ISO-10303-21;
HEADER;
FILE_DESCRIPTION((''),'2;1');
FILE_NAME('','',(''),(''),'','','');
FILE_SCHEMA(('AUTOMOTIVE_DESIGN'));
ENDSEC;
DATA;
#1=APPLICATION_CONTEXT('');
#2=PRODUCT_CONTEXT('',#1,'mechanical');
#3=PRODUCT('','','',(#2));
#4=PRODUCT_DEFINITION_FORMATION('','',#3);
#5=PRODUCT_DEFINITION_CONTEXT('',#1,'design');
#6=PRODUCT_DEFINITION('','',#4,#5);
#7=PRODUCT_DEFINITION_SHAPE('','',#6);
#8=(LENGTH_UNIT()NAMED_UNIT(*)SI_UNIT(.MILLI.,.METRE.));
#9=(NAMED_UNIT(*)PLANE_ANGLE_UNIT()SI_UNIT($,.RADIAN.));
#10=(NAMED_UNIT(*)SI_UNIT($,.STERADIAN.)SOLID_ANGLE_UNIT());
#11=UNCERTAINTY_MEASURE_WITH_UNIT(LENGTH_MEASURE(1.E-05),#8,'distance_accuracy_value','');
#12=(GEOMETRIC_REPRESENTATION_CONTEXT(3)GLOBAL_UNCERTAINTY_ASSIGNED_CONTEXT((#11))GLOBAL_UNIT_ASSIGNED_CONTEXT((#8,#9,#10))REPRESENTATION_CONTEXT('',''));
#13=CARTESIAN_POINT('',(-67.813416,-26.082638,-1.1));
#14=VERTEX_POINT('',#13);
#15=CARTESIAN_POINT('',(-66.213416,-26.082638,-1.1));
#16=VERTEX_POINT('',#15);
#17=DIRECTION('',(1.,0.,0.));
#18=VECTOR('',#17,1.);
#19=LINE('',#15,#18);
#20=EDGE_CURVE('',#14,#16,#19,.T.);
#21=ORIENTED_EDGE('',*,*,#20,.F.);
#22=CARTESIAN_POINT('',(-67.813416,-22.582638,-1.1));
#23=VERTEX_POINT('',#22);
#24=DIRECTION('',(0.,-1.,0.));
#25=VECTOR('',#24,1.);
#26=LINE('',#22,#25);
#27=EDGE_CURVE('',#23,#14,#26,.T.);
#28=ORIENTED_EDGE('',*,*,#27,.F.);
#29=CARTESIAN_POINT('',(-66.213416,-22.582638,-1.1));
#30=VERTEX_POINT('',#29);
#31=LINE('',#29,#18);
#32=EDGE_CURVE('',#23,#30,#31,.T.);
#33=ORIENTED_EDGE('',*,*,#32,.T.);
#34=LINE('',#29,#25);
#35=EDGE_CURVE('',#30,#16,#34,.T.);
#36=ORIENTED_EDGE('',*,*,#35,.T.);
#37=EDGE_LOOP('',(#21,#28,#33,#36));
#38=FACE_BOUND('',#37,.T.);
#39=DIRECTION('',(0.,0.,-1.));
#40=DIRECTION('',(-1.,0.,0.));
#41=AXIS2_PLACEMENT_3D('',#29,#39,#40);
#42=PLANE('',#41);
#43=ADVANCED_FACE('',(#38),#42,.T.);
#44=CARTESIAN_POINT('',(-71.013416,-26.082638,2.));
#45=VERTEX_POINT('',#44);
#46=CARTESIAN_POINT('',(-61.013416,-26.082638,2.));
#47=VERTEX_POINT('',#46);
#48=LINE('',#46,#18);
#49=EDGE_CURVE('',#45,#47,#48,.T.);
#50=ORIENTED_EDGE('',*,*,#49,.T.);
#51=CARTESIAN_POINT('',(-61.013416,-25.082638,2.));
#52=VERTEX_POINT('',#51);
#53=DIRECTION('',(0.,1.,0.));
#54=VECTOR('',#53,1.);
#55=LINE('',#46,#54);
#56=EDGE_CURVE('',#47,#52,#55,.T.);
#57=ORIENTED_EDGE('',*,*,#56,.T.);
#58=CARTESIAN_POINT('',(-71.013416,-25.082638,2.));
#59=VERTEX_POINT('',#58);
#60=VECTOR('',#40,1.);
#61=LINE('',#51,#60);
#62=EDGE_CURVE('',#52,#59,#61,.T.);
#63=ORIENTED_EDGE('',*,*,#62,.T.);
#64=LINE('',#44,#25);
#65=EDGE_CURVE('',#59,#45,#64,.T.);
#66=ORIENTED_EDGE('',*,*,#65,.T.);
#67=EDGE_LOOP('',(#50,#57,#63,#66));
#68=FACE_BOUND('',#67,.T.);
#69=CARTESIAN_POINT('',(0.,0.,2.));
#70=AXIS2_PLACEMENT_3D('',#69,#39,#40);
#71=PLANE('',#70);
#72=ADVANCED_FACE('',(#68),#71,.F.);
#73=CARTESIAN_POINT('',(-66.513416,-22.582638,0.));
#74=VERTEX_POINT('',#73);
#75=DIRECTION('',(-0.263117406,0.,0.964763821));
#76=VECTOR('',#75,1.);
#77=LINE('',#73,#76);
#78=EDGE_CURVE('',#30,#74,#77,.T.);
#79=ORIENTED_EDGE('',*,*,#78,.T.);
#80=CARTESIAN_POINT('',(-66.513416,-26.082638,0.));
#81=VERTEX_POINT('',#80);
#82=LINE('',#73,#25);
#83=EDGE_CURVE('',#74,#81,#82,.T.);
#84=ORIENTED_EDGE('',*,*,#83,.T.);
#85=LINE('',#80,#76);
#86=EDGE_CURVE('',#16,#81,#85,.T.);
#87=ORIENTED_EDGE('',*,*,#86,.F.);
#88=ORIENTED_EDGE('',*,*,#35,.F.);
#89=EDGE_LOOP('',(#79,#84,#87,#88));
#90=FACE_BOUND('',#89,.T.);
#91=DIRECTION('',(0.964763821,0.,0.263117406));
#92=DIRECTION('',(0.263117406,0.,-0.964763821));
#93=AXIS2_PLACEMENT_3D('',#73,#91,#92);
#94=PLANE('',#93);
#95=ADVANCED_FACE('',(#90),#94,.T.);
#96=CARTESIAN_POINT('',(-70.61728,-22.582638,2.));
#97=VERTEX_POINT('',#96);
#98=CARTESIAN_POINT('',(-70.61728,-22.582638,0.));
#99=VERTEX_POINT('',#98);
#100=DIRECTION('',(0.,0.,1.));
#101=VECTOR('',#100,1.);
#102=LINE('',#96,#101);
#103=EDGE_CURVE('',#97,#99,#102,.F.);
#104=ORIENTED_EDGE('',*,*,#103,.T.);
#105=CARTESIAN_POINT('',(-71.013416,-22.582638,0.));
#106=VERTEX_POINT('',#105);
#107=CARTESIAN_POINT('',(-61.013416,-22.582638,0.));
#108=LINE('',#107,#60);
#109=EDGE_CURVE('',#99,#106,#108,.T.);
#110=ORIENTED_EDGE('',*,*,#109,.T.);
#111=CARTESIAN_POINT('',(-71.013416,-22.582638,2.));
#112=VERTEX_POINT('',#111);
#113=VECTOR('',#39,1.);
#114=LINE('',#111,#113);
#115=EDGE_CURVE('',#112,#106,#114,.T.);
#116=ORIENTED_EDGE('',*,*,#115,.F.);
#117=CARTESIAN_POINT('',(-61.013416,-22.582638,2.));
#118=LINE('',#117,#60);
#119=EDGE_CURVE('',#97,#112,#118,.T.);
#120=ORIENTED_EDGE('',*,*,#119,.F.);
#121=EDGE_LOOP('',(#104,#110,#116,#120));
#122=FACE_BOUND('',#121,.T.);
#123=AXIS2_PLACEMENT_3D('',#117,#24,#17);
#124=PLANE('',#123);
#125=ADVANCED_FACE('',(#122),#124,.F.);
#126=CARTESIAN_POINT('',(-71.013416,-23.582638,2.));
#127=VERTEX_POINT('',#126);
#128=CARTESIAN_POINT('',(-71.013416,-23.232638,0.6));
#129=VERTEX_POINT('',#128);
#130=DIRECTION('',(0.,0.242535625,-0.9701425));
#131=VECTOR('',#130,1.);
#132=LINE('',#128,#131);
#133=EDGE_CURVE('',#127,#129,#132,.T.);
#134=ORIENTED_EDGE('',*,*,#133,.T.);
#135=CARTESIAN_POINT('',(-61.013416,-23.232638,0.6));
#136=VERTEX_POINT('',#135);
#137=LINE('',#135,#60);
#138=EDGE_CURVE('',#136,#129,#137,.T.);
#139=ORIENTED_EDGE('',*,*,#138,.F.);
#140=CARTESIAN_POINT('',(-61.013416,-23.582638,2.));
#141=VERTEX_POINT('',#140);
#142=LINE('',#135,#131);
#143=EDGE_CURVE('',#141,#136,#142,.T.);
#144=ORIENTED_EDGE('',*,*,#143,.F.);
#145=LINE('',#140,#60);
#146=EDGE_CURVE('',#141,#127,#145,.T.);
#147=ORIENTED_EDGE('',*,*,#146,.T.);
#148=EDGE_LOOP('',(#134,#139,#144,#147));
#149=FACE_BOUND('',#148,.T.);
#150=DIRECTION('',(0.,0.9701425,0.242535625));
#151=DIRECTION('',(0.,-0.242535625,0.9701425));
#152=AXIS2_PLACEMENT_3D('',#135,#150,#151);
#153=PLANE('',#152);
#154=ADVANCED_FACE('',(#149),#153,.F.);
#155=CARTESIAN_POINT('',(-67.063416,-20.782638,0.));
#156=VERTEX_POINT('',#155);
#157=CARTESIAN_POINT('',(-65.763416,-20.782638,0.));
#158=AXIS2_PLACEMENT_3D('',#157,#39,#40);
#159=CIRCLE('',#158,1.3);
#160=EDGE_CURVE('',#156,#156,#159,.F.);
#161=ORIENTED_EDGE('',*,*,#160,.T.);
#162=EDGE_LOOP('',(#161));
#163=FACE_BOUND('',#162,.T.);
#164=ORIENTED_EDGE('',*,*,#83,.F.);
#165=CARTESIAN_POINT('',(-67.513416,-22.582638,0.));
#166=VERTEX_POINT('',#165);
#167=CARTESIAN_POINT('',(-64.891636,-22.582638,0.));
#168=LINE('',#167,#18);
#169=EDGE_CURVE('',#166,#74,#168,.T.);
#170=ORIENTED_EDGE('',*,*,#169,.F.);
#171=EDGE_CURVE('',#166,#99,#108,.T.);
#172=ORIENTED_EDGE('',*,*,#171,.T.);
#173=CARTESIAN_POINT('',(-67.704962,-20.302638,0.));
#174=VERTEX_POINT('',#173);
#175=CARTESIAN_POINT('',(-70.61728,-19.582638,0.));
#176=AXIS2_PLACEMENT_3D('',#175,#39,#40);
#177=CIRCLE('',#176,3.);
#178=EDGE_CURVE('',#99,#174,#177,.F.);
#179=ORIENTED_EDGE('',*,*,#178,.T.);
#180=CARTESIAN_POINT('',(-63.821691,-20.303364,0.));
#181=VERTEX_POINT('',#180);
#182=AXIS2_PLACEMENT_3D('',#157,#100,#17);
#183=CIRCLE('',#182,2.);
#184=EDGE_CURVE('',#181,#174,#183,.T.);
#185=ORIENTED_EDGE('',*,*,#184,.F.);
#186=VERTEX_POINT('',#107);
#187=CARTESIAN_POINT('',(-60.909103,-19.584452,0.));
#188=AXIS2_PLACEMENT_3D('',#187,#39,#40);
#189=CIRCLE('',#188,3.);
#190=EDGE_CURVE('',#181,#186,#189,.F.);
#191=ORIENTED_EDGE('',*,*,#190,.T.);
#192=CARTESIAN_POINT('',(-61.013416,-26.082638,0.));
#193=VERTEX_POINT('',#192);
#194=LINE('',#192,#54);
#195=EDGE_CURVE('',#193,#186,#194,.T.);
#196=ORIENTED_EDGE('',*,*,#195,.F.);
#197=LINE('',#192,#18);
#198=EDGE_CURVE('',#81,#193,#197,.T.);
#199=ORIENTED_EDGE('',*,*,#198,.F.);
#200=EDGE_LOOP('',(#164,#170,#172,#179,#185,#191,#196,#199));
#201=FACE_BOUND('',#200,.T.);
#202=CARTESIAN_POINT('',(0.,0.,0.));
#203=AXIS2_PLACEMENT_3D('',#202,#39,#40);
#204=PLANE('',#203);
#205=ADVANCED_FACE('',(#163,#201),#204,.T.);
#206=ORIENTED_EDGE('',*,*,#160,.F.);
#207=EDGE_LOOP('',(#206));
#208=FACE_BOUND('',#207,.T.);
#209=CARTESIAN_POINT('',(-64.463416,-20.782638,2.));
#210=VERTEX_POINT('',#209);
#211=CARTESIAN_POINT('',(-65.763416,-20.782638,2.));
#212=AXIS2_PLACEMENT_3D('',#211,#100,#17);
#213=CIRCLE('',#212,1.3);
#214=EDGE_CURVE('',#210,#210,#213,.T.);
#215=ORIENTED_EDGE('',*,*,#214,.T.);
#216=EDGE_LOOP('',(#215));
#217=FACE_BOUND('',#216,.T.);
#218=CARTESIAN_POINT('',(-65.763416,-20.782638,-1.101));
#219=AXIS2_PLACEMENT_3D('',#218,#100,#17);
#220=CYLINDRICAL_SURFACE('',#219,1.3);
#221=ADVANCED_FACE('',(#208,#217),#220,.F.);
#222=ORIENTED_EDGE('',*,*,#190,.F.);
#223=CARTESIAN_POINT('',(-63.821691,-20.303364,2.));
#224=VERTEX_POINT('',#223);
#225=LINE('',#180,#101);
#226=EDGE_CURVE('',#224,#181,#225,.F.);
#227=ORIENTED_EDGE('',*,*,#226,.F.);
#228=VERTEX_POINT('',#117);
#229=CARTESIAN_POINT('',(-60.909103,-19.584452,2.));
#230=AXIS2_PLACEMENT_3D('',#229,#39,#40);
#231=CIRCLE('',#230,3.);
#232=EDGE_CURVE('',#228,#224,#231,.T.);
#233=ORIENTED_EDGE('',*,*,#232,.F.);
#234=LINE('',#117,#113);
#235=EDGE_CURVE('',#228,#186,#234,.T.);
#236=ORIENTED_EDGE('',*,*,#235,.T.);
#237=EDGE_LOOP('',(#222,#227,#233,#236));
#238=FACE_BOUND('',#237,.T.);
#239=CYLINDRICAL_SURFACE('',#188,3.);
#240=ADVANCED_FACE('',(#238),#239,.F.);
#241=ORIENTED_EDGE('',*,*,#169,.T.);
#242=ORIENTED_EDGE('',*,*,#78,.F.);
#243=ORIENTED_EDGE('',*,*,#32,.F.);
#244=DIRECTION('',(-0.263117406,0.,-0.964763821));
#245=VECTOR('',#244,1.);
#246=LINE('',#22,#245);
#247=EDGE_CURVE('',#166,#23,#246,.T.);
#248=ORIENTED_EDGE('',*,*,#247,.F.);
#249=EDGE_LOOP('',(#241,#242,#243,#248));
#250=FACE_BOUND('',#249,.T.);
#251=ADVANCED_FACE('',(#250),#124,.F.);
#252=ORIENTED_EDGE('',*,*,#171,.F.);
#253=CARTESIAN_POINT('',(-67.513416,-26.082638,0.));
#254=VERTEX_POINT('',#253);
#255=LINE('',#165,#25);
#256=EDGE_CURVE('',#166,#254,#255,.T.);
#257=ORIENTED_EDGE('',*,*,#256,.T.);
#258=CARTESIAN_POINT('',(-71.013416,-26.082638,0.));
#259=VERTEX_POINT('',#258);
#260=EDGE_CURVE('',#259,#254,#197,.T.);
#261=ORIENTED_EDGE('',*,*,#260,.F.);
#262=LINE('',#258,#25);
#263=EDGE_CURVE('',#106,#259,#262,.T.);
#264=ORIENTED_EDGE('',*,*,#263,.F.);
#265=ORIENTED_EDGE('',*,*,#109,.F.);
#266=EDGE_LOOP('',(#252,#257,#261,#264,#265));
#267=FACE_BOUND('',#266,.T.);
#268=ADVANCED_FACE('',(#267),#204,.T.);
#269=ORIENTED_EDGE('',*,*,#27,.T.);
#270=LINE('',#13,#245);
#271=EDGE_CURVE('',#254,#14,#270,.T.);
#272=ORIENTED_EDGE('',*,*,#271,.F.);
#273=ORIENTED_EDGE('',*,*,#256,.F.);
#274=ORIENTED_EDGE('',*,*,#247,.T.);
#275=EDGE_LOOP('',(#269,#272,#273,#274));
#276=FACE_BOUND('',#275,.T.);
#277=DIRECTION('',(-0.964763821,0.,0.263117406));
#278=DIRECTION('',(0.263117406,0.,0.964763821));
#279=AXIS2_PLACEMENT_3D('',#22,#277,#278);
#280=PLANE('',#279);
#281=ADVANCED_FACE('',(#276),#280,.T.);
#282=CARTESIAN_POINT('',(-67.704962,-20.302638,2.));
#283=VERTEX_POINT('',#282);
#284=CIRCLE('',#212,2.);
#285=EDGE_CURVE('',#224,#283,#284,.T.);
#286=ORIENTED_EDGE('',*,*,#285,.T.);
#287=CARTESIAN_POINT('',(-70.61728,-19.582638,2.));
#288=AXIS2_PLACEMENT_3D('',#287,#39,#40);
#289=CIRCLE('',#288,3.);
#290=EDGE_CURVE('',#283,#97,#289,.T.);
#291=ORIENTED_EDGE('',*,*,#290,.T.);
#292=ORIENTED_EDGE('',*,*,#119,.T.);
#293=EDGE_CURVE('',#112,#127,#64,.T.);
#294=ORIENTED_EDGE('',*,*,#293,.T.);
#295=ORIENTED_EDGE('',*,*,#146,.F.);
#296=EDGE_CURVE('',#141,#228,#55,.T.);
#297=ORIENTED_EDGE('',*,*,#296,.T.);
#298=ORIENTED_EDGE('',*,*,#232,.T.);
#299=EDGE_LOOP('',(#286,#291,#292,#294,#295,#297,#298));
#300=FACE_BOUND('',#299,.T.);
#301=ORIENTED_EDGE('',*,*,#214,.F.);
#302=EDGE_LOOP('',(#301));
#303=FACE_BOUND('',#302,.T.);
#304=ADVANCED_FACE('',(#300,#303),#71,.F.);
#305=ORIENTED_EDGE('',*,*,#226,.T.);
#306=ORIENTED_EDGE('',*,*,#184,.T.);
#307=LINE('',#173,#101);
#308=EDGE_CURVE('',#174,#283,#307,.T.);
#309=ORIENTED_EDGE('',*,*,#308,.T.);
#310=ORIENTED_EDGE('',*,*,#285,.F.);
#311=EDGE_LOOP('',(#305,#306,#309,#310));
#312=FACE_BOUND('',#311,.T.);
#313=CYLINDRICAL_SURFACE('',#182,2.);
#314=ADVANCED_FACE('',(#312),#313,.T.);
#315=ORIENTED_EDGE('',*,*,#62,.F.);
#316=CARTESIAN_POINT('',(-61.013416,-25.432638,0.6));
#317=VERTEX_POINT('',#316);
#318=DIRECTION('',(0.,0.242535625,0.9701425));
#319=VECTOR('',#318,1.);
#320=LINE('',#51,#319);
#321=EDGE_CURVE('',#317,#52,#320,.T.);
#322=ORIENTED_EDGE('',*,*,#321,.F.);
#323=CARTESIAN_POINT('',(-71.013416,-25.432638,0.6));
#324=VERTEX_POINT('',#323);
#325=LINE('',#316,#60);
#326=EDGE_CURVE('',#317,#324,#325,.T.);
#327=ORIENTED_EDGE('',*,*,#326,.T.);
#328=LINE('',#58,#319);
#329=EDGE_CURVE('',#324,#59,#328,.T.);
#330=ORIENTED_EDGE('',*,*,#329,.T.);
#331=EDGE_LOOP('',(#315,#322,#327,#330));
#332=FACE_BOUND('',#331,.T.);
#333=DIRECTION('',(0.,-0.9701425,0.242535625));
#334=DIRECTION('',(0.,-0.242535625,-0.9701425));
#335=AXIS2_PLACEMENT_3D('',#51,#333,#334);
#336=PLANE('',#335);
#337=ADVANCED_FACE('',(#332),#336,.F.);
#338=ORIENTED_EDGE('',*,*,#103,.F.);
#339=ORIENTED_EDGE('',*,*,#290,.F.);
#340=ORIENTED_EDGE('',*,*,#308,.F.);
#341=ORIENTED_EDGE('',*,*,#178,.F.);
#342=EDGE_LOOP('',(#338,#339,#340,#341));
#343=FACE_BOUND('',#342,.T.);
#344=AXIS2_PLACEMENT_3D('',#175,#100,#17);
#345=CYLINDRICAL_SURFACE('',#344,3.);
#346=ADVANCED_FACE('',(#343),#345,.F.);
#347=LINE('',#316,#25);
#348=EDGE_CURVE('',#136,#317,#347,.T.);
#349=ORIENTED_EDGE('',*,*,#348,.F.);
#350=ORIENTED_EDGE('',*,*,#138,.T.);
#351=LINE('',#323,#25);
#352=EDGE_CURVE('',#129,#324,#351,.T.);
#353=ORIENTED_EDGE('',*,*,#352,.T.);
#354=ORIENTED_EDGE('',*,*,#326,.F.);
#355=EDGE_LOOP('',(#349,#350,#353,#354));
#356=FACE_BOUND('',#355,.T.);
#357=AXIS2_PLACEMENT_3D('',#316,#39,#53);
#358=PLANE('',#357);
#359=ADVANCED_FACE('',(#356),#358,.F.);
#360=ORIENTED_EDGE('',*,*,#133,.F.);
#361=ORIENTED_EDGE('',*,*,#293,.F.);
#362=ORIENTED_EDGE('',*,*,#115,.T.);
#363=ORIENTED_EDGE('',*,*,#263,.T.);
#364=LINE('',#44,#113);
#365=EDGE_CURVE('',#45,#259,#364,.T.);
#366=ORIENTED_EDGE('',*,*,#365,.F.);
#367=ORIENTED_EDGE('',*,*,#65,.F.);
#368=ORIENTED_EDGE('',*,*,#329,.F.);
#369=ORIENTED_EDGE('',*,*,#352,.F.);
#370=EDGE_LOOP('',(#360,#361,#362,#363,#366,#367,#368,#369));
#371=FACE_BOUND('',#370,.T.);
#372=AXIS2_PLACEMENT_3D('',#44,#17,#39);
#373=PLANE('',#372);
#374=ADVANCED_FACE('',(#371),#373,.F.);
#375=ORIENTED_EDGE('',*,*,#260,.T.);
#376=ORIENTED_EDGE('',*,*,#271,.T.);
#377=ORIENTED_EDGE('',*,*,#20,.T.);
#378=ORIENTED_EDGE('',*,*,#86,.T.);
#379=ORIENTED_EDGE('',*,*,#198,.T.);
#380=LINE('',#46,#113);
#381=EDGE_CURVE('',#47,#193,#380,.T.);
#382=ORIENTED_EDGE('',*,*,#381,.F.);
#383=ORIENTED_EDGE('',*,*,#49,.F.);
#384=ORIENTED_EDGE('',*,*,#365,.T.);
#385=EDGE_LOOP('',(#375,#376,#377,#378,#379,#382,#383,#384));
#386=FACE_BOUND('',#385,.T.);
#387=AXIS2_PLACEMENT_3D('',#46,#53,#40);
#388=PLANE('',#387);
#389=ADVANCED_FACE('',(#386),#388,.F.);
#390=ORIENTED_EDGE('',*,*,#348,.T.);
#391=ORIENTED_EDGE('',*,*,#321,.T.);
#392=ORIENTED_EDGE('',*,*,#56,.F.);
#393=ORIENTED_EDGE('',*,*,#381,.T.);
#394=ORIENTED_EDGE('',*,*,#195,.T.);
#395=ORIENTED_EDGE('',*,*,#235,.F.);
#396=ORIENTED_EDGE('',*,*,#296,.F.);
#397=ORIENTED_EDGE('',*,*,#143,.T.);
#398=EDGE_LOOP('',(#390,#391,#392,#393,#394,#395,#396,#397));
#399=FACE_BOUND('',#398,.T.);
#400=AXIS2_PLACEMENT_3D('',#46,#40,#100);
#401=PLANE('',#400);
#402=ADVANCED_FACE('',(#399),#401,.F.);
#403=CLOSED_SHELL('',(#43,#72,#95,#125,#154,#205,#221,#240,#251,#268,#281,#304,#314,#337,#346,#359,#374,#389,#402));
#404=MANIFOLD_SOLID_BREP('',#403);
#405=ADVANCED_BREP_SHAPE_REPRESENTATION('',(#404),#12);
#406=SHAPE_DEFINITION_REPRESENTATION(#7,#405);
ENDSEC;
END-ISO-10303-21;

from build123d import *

# Parameters (mm, degrees)
ESQUISSE1_W             = 10
ESQUISSE1_H             = 3.5
BOSS_EXTRU_1_DEPTH      = 2
ENL_V_MAT_EXTRU_1_DEPTH = 29.00542817
BOSS_EXTRU_2_DEPTH      = 3.5
BOSS_EXTRU_3_DEPTH      = 2
ENL_V_MAT_EXTRU_2_REACH = 77.715
ESQUISSE5_R             = 1.3
CONG_1_R                = 3


with BuildPart() as part:
    # Esquisse1 → Boss.-Extru.1 (new body)
    with BuildSketch(Plane.XY):
        with Locations((-66.013415918, -24.332638037)):
            Rectangle(ESQUISSE1_W, ESQUISSE1_H)
    extrude(amount=BOSS_EXTRU_1_DEPTH)

    # Esquisse2 → Enlèv. mat.-Extru.1 (cut, through all)
    with BuildSketch(Plane.ZY.offset(71.013415918)):
        Polygon((2, -25.082638037), (2, -23.582638037), (0.6, -23.232638037), (0.6, -25.432638037), align=None)
    extrude(amount=-ENL_V_MAT_EXTRU_1_DEPTH, mode=Mode.SUBTRACT)

    # Esquisse3 → Boss.-Extru.2 (add)
    with BuildSketch(Plane.XZ.offset(26.082638037)):
        Polygon((-66.513415918, 0), (-66.213415918, -1.1), (-67.813415918, -1.1), (-67.513415918, 0), align=None)
    extrude(amount=-BOSS_EXTRU_2_DEPTH)

    # Esquisse4 → Boss.-Extru.3 (add)
    with BuildSketch(Plane.XY.offset(2)):
        with BuildLine():
            Line((-64.891636129, -22.582638037), (-66.635195707, -22.582638037))
            ThreePointArc((-66.635195707, -22.582638037), (-65.763415918, -18.782638037), (-64.891636129, -22.582638037))
        make_face()
    extrude(amount=-BOSS_EXTRU_3_DEPTH)

    # Esquisse5 → Enlèv. mat.-Extru.2 (cut, up to next)
    with BuildSketch(Plane.XY.offset(2), mode=Mode.PRIVATE) as enl_v_mat_extru_2_sk1:
        with Locations((-65.763415918, -20.782638037)):
            Circle(ESQUISSE5_R)
    enl_v_mat_extru_2_tool1 = extrude(enl_v_mat_extru_2_sk1.sketch, amount=-ENL_V_MAT_EXTRU_2_REACH, mode=Mode.PRIVATE) & part.part
    add(enl_v_mat_extru_2_tool1.solids().sort_by_distance((-65.763416, -20.782638, 2))[0], mode=Mode.SUBTRACT)

    # Congé1
    # the kernel refuses this fillet: 3 mm, written as the material it adds along each edge
    with BuildSketch(Plane(origin=(-66.635195707, -22.582638037, 2), x_dir=(-1, 0, 0), z_dir=(0, 0, -1))) as cong_1_piece_1:
        with BuildLine():
            CenterArc((3.982084651, 3), CONG_1_R, 193.886540363, 76.113459637)
            Line((1.069765987, 2.28), (1.011519614, 2.2656))
            ThreePointArc((1.011519614, 2.2656), (0.884509664, 0.975956702), (-0.026153394, 0.054))
            Line((-0.026153394, 0.054), (0, -0.06))
            Line((0, -0.06), (3.982084651, -0.06))
            Line((3.982084651, -0.06), (3.982084651, 0))
        make_face()
    extrude(amount=2)
    with BuildSketch(Plane(origin=(-64.891636129, -22.582638037, 2), x_dir=(1, 0, 0), z_dir=(0, 0, -1))) as cong_1_piece_2:
        with BuildLine():
            CenterArc((3.982532775, -2.998185933), CONG_1_R, 91.99262488, 74.142247301)
            Line((1.069945237, -2.279274373), (1.011693486, -2.264896142))
            ThreePointArc((1.011693486, -2.264896142), (0.884355653, -0.975628536), (-0.026153394, -0.054))
            Line((-0.026153394, -0.054), (0, 0.06))
            ThreePointArc((0, 0.06), (1.939110106, 0.06), (3.87613396, 0.059963719))
            Line((3.87613396, 0.059963719), (3.878220211, 0))
        make_face()
    extrude(amount=2)


solid = part.part
